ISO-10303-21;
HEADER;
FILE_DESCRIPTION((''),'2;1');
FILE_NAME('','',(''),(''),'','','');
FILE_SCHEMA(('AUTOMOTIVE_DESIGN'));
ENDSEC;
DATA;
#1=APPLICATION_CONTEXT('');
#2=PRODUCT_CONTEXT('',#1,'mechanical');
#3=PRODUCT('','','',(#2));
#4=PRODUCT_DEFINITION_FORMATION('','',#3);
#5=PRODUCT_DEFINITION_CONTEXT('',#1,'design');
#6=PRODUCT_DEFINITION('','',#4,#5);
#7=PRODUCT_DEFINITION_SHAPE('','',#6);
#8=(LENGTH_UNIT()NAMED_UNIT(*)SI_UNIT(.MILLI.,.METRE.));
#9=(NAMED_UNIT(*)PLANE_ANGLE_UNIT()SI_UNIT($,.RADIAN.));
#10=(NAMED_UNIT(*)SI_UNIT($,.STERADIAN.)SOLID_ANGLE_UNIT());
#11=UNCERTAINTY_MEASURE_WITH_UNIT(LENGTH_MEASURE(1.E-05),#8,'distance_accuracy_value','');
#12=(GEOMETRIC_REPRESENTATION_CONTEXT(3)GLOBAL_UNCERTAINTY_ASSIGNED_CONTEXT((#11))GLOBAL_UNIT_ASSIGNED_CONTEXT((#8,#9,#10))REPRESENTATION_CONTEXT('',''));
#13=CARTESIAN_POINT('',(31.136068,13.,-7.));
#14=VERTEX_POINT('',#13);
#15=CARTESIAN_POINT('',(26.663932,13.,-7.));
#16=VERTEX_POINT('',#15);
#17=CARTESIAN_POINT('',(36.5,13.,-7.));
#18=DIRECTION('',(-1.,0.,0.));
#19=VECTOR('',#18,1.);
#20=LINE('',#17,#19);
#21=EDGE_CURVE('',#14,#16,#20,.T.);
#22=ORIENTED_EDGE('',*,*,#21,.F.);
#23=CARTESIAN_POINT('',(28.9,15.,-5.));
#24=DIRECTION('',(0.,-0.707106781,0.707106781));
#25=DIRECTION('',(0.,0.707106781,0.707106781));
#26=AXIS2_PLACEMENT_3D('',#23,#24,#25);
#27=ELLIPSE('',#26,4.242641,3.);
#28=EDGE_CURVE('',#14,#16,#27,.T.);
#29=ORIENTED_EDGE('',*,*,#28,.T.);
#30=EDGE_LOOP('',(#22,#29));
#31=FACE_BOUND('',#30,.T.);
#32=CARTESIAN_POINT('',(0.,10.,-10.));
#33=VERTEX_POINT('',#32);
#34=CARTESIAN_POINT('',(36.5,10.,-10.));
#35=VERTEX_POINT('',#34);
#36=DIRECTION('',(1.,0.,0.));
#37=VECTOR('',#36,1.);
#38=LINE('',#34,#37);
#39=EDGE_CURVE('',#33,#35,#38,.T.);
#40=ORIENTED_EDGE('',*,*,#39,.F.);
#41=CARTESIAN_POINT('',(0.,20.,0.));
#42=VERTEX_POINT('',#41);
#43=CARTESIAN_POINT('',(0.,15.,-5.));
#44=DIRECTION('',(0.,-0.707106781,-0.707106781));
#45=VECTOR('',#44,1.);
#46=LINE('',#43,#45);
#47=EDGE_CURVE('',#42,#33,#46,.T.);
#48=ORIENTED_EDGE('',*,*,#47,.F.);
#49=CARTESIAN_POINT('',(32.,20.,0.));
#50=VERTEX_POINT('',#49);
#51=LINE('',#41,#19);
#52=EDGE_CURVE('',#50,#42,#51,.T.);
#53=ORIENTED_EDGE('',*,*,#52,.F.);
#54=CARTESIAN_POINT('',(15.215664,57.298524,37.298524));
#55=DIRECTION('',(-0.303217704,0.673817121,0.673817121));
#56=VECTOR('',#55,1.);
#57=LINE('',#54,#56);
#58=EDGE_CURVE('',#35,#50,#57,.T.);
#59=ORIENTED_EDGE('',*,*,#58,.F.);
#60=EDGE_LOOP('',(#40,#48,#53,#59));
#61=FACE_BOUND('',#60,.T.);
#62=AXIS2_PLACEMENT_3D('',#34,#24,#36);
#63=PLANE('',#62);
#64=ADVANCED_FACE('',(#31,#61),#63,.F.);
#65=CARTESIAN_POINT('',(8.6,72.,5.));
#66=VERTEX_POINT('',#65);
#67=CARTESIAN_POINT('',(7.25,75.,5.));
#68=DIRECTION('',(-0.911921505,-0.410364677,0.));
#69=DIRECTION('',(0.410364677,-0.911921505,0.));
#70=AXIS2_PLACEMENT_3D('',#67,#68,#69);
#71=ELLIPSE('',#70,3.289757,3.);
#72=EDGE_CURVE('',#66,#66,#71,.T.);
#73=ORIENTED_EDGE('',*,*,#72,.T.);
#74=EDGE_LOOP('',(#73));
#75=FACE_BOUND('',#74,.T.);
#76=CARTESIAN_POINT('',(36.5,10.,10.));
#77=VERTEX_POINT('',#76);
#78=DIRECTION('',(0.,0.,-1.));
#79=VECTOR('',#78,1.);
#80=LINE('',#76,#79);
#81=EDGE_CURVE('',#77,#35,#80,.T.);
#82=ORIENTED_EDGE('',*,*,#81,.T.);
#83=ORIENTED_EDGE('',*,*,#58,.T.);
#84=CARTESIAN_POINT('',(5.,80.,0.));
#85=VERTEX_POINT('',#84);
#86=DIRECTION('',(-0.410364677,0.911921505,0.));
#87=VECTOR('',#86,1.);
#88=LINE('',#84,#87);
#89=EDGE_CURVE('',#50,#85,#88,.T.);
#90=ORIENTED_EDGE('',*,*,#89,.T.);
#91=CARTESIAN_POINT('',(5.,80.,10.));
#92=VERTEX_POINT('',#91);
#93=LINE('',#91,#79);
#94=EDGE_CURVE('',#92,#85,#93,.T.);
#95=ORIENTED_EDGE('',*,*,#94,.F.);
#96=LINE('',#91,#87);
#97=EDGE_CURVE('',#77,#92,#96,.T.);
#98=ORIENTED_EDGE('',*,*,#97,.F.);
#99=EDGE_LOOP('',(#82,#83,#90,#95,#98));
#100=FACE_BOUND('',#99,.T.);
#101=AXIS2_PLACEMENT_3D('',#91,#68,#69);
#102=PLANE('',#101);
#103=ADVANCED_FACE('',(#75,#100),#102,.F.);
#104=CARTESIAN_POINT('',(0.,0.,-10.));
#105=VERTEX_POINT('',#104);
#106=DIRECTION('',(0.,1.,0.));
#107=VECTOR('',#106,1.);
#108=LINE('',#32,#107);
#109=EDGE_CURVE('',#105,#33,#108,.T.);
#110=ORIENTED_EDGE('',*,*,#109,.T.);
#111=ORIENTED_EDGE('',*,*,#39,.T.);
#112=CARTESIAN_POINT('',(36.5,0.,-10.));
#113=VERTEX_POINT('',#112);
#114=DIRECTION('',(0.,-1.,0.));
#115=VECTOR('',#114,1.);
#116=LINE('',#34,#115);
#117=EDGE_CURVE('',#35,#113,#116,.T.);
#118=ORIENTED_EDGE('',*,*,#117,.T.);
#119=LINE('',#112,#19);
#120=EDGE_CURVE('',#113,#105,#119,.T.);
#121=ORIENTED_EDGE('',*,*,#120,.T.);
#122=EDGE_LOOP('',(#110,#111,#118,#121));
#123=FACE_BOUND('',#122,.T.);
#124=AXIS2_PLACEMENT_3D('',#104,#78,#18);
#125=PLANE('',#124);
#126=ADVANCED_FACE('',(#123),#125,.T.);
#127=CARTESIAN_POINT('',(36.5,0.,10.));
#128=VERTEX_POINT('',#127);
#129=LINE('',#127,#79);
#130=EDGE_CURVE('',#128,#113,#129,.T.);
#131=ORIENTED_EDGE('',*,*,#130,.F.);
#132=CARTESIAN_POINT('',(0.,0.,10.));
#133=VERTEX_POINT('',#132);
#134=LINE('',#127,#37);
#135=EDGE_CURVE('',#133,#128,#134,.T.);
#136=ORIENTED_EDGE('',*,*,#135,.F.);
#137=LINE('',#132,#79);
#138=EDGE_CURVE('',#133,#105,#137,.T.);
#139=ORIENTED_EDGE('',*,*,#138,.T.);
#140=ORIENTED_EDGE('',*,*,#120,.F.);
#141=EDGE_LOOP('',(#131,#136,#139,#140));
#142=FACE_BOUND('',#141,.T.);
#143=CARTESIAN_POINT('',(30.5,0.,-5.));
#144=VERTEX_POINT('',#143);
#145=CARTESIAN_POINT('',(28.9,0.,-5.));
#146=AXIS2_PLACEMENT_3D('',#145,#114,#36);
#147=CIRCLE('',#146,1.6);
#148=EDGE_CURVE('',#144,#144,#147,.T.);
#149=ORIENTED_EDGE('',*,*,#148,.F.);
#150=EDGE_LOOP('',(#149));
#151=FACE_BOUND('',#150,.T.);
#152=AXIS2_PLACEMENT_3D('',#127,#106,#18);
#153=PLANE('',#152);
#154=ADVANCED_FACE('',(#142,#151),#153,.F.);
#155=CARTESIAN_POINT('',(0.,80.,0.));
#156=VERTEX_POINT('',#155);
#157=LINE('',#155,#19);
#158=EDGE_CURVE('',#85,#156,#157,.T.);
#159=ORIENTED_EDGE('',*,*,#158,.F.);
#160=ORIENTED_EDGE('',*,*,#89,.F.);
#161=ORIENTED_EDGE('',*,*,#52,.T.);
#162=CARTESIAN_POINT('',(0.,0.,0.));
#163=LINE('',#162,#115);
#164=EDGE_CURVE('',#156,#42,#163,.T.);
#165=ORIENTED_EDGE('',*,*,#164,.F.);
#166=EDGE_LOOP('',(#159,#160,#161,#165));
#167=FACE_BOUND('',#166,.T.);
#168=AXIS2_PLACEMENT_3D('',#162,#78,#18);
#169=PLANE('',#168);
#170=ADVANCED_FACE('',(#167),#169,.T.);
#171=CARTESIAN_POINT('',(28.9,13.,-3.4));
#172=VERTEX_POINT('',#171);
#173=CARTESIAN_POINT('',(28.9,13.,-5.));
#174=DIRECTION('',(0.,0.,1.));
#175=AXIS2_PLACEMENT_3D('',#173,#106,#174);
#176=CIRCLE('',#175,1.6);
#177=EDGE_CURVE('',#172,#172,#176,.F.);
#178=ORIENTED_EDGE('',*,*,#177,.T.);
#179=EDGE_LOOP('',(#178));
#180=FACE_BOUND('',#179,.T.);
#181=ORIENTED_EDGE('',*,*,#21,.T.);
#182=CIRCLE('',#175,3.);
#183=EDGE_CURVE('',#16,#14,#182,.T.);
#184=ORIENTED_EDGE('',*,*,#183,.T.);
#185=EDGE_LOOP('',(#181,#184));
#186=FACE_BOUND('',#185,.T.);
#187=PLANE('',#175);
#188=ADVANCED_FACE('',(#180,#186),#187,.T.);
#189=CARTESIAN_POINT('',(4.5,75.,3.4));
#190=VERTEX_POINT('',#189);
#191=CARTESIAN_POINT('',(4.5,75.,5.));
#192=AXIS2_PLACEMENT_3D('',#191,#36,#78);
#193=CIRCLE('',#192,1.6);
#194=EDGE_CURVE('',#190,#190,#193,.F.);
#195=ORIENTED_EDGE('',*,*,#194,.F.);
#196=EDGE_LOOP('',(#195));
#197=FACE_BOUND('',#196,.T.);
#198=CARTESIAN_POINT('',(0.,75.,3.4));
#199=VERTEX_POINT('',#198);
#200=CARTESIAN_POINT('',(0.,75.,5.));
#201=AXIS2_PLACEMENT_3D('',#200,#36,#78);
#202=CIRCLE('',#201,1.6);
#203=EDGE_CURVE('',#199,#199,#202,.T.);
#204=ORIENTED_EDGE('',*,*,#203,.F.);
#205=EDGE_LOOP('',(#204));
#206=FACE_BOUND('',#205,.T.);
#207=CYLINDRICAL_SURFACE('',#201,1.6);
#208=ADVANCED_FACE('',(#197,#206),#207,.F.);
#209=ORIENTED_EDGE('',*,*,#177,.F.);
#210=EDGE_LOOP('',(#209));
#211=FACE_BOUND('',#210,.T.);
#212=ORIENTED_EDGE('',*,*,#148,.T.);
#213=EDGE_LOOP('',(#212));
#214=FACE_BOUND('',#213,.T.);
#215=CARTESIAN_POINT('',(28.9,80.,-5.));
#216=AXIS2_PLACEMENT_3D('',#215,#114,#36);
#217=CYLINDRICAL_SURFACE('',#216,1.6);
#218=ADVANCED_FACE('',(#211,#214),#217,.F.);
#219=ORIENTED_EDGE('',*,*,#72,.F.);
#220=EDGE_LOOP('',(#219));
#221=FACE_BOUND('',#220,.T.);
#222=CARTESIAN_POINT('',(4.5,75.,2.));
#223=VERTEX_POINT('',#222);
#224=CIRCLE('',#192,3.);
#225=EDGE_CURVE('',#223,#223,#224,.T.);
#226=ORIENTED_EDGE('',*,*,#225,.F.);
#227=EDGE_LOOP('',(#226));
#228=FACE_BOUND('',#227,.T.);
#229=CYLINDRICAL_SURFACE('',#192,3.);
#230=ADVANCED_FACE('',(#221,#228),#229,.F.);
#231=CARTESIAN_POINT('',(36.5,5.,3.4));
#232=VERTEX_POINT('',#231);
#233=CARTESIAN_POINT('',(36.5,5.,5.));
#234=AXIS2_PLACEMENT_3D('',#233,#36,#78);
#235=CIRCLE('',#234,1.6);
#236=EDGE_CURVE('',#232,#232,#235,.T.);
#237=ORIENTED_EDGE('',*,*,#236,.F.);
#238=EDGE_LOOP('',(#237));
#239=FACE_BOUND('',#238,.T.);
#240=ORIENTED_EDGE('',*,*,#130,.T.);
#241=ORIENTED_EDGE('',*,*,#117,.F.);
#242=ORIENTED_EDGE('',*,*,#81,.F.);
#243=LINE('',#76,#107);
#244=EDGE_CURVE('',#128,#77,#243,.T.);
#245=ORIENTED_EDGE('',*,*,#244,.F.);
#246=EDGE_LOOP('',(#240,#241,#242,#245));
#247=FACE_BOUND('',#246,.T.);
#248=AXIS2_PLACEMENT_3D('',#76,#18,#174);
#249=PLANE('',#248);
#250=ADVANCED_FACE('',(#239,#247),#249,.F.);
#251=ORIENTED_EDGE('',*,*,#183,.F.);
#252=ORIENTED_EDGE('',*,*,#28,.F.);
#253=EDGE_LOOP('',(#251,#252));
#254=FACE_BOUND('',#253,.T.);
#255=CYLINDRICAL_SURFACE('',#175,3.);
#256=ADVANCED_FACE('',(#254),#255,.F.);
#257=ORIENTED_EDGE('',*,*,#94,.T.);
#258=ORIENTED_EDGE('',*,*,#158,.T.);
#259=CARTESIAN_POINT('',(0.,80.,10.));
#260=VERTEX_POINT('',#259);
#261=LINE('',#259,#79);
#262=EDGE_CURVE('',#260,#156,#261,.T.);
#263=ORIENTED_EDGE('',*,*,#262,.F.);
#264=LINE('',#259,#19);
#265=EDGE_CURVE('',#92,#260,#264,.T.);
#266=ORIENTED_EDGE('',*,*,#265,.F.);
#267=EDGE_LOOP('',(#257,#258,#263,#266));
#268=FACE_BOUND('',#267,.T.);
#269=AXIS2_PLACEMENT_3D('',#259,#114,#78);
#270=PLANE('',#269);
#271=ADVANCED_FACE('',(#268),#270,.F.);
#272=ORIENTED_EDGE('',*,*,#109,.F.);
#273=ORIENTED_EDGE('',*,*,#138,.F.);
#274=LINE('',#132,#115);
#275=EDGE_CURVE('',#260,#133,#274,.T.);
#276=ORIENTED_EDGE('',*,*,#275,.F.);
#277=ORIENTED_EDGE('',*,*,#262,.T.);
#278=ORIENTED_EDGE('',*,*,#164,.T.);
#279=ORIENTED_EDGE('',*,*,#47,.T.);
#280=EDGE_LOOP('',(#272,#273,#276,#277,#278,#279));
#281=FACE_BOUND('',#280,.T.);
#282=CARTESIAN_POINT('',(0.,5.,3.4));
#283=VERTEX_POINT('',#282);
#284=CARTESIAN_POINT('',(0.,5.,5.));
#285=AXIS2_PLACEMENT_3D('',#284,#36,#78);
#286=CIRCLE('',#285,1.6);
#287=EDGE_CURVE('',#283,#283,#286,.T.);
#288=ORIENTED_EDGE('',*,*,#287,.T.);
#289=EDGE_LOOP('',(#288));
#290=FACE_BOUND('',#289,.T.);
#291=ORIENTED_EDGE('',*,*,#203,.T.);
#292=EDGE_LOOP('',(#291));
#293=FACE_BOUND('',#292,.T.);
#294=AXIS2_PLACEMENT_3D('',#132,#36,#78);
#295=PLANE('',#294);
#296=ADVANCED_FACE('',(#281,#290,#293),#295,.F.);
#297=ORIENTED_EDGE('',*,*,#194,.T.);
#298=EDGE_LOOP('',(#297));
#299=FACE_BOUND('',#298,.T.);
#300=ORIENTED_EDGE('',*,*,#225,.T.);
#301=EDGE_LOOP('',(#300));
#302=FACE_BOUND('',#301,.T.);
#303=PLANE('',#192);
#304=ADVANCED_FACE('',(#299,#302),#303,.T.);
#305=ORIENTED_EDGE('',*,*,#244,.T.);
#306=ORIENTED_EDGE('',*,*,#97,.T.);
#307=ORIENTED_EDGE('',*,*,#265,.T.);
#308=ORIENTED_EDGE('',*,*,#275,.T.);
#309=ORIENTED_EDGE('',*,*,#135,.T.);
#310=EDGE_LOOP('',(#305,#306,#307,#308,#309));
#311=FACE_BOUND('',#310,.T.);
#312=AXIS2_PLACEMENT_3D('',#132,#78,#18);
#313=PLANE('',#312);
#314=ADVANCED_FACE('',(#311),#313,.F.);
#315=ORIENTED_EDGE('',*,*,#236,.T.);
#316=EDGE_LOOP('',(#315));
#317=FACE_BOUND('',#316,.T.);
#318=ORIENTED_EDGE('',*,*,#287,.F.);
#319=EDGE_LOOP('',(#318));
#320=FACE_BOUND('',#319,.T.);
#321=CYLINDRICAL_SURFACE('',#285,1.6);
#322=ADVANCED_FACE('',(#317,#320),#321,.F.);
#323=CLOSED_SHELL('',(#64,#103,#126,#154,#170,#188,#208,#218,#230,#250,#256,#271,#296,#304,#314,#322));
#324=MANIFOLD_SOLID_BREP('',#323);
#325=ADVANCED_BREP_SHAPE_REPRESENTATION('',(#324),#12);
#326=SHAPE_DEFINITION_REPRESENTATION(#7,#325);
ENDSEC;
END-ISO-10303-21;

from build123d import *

# Parameters (mm, degrees)
EXTRUDE_1_DEPTH     = 10
SKETCH_2_W          = 36.5
SKETCH_2_H          = 10
EXTRUDE_2_DEPTH     = 10
CHAMFER_1_SIZE      = 10
SKETCH_3_R          = 1.6
CUT_EXTRUDE_1_DEPTH = 89.5
SKETCH_4_R          = 1.6
CUT_EXTRUDE_2_DEPTH = 89.5
SKETCH_5_R          = 3
CUT_EXTRUDE_3_DEPTH = 32
SKETCH_6_R          = 3
CUT_EXTRUDE_4_DEPTH = 67


with BuildPart() as part:
    # ｽｹｯﾁ1 → ﾎﾞｽ - 押し出し1 (new body)
    with BuildSketch(Plane.XY):
        Polygon((0, 0), (0, 80), (5, 80), (36.5, 10), (36.5, 0), align=None)
    extrude(amount=EXTRUDE_1_DEPTH)

    # ｽｹｯﾁ2 → ﾎﾞｽ - 押し出し2 (add)
    with BuildSketch(Plane(origin=(0, 0, 0), x_dir=(-1, 0, 0), z_dir=(0, 0, -1))):
        with Locations((-18.25, 5)):
            Rectangle(SKETCH_2_W, SKETCH_2_H)
    extrude(amount=EXTRUDE_2_DEPTH)

    # 面取り1
    chamfer_1_edges = [part.edges().sort_by_distance(p)[0] for p in [
        (18.25, 10, 0),
    ]]
    chamfer(chamfer_1_edges, length=CHAMFER_1_SIZE - 0.0001)  # a hair under: the kernel refuses the full size

    # ｽｹｯﾁ3 → ｶｯﾄ - 押し出し1 (cut, through all)
    with BuildSketch(Plane(origin=(36.5, 0, 0), x_dir=(0, 0, -1), z_dir=(1, 0, 0))):
        with Locations((-5, 5)):
            Circle(SKETCH_3_R)
        with Locations((-5, 75)):
            Circle(SKETCH_3_R)
    extrude(amount=-CUT_EXTRUDE_1_DEPTH, mode=Mode.SUBTRACT)

    # ｽｹｯﾁ4 → ｶｯﾄ - 押し出し2 (cut, through all)
    with BuildSketch(Plane(origin=(0, 0, 0), x_dir=(-1, 0, 0), z_dir=(0, -1, 0))):
        with Locations(Location((-28.9, 5, 0), (0, 0, 180))):
            Circle(SKETCH_4_R)
    extrude(amount=-CUT_EXTRUDE_2_DEPTH, mode=Mode.SUBTRACT)

    # ｽｹｯﾁ5 → ｶｯﾄ - 押し出し3 (cut)
    with BuildSketch(Plane(origin=(36.5, 0, 0), x_dir=(0, 0, -1), z_dir=(1, 0, 0))):
        with Locations((-5, 75)):
            Circle(SKETCH_5_R)
    extrude(amount=-CUT_EXTRUDE_3_DEPTH, mode=Mode.SUBTRACT)

    # ｽｹｯﾁ6 → ｶｯﾄ - 押し出し4 (cut)
    with BuildSketch(Plane(origin=(0, 80, 0), x_dir=(1, 0, 0), z_dir=(0, 1, 0))):
        with Locations((28.9, 5)):
            Circle(SKETCH_6_R)
    extrude(amount=-CUT_EXTRUDE_4_DEPTH, mode=Mode.SUBTRACT)


solid = part.part
